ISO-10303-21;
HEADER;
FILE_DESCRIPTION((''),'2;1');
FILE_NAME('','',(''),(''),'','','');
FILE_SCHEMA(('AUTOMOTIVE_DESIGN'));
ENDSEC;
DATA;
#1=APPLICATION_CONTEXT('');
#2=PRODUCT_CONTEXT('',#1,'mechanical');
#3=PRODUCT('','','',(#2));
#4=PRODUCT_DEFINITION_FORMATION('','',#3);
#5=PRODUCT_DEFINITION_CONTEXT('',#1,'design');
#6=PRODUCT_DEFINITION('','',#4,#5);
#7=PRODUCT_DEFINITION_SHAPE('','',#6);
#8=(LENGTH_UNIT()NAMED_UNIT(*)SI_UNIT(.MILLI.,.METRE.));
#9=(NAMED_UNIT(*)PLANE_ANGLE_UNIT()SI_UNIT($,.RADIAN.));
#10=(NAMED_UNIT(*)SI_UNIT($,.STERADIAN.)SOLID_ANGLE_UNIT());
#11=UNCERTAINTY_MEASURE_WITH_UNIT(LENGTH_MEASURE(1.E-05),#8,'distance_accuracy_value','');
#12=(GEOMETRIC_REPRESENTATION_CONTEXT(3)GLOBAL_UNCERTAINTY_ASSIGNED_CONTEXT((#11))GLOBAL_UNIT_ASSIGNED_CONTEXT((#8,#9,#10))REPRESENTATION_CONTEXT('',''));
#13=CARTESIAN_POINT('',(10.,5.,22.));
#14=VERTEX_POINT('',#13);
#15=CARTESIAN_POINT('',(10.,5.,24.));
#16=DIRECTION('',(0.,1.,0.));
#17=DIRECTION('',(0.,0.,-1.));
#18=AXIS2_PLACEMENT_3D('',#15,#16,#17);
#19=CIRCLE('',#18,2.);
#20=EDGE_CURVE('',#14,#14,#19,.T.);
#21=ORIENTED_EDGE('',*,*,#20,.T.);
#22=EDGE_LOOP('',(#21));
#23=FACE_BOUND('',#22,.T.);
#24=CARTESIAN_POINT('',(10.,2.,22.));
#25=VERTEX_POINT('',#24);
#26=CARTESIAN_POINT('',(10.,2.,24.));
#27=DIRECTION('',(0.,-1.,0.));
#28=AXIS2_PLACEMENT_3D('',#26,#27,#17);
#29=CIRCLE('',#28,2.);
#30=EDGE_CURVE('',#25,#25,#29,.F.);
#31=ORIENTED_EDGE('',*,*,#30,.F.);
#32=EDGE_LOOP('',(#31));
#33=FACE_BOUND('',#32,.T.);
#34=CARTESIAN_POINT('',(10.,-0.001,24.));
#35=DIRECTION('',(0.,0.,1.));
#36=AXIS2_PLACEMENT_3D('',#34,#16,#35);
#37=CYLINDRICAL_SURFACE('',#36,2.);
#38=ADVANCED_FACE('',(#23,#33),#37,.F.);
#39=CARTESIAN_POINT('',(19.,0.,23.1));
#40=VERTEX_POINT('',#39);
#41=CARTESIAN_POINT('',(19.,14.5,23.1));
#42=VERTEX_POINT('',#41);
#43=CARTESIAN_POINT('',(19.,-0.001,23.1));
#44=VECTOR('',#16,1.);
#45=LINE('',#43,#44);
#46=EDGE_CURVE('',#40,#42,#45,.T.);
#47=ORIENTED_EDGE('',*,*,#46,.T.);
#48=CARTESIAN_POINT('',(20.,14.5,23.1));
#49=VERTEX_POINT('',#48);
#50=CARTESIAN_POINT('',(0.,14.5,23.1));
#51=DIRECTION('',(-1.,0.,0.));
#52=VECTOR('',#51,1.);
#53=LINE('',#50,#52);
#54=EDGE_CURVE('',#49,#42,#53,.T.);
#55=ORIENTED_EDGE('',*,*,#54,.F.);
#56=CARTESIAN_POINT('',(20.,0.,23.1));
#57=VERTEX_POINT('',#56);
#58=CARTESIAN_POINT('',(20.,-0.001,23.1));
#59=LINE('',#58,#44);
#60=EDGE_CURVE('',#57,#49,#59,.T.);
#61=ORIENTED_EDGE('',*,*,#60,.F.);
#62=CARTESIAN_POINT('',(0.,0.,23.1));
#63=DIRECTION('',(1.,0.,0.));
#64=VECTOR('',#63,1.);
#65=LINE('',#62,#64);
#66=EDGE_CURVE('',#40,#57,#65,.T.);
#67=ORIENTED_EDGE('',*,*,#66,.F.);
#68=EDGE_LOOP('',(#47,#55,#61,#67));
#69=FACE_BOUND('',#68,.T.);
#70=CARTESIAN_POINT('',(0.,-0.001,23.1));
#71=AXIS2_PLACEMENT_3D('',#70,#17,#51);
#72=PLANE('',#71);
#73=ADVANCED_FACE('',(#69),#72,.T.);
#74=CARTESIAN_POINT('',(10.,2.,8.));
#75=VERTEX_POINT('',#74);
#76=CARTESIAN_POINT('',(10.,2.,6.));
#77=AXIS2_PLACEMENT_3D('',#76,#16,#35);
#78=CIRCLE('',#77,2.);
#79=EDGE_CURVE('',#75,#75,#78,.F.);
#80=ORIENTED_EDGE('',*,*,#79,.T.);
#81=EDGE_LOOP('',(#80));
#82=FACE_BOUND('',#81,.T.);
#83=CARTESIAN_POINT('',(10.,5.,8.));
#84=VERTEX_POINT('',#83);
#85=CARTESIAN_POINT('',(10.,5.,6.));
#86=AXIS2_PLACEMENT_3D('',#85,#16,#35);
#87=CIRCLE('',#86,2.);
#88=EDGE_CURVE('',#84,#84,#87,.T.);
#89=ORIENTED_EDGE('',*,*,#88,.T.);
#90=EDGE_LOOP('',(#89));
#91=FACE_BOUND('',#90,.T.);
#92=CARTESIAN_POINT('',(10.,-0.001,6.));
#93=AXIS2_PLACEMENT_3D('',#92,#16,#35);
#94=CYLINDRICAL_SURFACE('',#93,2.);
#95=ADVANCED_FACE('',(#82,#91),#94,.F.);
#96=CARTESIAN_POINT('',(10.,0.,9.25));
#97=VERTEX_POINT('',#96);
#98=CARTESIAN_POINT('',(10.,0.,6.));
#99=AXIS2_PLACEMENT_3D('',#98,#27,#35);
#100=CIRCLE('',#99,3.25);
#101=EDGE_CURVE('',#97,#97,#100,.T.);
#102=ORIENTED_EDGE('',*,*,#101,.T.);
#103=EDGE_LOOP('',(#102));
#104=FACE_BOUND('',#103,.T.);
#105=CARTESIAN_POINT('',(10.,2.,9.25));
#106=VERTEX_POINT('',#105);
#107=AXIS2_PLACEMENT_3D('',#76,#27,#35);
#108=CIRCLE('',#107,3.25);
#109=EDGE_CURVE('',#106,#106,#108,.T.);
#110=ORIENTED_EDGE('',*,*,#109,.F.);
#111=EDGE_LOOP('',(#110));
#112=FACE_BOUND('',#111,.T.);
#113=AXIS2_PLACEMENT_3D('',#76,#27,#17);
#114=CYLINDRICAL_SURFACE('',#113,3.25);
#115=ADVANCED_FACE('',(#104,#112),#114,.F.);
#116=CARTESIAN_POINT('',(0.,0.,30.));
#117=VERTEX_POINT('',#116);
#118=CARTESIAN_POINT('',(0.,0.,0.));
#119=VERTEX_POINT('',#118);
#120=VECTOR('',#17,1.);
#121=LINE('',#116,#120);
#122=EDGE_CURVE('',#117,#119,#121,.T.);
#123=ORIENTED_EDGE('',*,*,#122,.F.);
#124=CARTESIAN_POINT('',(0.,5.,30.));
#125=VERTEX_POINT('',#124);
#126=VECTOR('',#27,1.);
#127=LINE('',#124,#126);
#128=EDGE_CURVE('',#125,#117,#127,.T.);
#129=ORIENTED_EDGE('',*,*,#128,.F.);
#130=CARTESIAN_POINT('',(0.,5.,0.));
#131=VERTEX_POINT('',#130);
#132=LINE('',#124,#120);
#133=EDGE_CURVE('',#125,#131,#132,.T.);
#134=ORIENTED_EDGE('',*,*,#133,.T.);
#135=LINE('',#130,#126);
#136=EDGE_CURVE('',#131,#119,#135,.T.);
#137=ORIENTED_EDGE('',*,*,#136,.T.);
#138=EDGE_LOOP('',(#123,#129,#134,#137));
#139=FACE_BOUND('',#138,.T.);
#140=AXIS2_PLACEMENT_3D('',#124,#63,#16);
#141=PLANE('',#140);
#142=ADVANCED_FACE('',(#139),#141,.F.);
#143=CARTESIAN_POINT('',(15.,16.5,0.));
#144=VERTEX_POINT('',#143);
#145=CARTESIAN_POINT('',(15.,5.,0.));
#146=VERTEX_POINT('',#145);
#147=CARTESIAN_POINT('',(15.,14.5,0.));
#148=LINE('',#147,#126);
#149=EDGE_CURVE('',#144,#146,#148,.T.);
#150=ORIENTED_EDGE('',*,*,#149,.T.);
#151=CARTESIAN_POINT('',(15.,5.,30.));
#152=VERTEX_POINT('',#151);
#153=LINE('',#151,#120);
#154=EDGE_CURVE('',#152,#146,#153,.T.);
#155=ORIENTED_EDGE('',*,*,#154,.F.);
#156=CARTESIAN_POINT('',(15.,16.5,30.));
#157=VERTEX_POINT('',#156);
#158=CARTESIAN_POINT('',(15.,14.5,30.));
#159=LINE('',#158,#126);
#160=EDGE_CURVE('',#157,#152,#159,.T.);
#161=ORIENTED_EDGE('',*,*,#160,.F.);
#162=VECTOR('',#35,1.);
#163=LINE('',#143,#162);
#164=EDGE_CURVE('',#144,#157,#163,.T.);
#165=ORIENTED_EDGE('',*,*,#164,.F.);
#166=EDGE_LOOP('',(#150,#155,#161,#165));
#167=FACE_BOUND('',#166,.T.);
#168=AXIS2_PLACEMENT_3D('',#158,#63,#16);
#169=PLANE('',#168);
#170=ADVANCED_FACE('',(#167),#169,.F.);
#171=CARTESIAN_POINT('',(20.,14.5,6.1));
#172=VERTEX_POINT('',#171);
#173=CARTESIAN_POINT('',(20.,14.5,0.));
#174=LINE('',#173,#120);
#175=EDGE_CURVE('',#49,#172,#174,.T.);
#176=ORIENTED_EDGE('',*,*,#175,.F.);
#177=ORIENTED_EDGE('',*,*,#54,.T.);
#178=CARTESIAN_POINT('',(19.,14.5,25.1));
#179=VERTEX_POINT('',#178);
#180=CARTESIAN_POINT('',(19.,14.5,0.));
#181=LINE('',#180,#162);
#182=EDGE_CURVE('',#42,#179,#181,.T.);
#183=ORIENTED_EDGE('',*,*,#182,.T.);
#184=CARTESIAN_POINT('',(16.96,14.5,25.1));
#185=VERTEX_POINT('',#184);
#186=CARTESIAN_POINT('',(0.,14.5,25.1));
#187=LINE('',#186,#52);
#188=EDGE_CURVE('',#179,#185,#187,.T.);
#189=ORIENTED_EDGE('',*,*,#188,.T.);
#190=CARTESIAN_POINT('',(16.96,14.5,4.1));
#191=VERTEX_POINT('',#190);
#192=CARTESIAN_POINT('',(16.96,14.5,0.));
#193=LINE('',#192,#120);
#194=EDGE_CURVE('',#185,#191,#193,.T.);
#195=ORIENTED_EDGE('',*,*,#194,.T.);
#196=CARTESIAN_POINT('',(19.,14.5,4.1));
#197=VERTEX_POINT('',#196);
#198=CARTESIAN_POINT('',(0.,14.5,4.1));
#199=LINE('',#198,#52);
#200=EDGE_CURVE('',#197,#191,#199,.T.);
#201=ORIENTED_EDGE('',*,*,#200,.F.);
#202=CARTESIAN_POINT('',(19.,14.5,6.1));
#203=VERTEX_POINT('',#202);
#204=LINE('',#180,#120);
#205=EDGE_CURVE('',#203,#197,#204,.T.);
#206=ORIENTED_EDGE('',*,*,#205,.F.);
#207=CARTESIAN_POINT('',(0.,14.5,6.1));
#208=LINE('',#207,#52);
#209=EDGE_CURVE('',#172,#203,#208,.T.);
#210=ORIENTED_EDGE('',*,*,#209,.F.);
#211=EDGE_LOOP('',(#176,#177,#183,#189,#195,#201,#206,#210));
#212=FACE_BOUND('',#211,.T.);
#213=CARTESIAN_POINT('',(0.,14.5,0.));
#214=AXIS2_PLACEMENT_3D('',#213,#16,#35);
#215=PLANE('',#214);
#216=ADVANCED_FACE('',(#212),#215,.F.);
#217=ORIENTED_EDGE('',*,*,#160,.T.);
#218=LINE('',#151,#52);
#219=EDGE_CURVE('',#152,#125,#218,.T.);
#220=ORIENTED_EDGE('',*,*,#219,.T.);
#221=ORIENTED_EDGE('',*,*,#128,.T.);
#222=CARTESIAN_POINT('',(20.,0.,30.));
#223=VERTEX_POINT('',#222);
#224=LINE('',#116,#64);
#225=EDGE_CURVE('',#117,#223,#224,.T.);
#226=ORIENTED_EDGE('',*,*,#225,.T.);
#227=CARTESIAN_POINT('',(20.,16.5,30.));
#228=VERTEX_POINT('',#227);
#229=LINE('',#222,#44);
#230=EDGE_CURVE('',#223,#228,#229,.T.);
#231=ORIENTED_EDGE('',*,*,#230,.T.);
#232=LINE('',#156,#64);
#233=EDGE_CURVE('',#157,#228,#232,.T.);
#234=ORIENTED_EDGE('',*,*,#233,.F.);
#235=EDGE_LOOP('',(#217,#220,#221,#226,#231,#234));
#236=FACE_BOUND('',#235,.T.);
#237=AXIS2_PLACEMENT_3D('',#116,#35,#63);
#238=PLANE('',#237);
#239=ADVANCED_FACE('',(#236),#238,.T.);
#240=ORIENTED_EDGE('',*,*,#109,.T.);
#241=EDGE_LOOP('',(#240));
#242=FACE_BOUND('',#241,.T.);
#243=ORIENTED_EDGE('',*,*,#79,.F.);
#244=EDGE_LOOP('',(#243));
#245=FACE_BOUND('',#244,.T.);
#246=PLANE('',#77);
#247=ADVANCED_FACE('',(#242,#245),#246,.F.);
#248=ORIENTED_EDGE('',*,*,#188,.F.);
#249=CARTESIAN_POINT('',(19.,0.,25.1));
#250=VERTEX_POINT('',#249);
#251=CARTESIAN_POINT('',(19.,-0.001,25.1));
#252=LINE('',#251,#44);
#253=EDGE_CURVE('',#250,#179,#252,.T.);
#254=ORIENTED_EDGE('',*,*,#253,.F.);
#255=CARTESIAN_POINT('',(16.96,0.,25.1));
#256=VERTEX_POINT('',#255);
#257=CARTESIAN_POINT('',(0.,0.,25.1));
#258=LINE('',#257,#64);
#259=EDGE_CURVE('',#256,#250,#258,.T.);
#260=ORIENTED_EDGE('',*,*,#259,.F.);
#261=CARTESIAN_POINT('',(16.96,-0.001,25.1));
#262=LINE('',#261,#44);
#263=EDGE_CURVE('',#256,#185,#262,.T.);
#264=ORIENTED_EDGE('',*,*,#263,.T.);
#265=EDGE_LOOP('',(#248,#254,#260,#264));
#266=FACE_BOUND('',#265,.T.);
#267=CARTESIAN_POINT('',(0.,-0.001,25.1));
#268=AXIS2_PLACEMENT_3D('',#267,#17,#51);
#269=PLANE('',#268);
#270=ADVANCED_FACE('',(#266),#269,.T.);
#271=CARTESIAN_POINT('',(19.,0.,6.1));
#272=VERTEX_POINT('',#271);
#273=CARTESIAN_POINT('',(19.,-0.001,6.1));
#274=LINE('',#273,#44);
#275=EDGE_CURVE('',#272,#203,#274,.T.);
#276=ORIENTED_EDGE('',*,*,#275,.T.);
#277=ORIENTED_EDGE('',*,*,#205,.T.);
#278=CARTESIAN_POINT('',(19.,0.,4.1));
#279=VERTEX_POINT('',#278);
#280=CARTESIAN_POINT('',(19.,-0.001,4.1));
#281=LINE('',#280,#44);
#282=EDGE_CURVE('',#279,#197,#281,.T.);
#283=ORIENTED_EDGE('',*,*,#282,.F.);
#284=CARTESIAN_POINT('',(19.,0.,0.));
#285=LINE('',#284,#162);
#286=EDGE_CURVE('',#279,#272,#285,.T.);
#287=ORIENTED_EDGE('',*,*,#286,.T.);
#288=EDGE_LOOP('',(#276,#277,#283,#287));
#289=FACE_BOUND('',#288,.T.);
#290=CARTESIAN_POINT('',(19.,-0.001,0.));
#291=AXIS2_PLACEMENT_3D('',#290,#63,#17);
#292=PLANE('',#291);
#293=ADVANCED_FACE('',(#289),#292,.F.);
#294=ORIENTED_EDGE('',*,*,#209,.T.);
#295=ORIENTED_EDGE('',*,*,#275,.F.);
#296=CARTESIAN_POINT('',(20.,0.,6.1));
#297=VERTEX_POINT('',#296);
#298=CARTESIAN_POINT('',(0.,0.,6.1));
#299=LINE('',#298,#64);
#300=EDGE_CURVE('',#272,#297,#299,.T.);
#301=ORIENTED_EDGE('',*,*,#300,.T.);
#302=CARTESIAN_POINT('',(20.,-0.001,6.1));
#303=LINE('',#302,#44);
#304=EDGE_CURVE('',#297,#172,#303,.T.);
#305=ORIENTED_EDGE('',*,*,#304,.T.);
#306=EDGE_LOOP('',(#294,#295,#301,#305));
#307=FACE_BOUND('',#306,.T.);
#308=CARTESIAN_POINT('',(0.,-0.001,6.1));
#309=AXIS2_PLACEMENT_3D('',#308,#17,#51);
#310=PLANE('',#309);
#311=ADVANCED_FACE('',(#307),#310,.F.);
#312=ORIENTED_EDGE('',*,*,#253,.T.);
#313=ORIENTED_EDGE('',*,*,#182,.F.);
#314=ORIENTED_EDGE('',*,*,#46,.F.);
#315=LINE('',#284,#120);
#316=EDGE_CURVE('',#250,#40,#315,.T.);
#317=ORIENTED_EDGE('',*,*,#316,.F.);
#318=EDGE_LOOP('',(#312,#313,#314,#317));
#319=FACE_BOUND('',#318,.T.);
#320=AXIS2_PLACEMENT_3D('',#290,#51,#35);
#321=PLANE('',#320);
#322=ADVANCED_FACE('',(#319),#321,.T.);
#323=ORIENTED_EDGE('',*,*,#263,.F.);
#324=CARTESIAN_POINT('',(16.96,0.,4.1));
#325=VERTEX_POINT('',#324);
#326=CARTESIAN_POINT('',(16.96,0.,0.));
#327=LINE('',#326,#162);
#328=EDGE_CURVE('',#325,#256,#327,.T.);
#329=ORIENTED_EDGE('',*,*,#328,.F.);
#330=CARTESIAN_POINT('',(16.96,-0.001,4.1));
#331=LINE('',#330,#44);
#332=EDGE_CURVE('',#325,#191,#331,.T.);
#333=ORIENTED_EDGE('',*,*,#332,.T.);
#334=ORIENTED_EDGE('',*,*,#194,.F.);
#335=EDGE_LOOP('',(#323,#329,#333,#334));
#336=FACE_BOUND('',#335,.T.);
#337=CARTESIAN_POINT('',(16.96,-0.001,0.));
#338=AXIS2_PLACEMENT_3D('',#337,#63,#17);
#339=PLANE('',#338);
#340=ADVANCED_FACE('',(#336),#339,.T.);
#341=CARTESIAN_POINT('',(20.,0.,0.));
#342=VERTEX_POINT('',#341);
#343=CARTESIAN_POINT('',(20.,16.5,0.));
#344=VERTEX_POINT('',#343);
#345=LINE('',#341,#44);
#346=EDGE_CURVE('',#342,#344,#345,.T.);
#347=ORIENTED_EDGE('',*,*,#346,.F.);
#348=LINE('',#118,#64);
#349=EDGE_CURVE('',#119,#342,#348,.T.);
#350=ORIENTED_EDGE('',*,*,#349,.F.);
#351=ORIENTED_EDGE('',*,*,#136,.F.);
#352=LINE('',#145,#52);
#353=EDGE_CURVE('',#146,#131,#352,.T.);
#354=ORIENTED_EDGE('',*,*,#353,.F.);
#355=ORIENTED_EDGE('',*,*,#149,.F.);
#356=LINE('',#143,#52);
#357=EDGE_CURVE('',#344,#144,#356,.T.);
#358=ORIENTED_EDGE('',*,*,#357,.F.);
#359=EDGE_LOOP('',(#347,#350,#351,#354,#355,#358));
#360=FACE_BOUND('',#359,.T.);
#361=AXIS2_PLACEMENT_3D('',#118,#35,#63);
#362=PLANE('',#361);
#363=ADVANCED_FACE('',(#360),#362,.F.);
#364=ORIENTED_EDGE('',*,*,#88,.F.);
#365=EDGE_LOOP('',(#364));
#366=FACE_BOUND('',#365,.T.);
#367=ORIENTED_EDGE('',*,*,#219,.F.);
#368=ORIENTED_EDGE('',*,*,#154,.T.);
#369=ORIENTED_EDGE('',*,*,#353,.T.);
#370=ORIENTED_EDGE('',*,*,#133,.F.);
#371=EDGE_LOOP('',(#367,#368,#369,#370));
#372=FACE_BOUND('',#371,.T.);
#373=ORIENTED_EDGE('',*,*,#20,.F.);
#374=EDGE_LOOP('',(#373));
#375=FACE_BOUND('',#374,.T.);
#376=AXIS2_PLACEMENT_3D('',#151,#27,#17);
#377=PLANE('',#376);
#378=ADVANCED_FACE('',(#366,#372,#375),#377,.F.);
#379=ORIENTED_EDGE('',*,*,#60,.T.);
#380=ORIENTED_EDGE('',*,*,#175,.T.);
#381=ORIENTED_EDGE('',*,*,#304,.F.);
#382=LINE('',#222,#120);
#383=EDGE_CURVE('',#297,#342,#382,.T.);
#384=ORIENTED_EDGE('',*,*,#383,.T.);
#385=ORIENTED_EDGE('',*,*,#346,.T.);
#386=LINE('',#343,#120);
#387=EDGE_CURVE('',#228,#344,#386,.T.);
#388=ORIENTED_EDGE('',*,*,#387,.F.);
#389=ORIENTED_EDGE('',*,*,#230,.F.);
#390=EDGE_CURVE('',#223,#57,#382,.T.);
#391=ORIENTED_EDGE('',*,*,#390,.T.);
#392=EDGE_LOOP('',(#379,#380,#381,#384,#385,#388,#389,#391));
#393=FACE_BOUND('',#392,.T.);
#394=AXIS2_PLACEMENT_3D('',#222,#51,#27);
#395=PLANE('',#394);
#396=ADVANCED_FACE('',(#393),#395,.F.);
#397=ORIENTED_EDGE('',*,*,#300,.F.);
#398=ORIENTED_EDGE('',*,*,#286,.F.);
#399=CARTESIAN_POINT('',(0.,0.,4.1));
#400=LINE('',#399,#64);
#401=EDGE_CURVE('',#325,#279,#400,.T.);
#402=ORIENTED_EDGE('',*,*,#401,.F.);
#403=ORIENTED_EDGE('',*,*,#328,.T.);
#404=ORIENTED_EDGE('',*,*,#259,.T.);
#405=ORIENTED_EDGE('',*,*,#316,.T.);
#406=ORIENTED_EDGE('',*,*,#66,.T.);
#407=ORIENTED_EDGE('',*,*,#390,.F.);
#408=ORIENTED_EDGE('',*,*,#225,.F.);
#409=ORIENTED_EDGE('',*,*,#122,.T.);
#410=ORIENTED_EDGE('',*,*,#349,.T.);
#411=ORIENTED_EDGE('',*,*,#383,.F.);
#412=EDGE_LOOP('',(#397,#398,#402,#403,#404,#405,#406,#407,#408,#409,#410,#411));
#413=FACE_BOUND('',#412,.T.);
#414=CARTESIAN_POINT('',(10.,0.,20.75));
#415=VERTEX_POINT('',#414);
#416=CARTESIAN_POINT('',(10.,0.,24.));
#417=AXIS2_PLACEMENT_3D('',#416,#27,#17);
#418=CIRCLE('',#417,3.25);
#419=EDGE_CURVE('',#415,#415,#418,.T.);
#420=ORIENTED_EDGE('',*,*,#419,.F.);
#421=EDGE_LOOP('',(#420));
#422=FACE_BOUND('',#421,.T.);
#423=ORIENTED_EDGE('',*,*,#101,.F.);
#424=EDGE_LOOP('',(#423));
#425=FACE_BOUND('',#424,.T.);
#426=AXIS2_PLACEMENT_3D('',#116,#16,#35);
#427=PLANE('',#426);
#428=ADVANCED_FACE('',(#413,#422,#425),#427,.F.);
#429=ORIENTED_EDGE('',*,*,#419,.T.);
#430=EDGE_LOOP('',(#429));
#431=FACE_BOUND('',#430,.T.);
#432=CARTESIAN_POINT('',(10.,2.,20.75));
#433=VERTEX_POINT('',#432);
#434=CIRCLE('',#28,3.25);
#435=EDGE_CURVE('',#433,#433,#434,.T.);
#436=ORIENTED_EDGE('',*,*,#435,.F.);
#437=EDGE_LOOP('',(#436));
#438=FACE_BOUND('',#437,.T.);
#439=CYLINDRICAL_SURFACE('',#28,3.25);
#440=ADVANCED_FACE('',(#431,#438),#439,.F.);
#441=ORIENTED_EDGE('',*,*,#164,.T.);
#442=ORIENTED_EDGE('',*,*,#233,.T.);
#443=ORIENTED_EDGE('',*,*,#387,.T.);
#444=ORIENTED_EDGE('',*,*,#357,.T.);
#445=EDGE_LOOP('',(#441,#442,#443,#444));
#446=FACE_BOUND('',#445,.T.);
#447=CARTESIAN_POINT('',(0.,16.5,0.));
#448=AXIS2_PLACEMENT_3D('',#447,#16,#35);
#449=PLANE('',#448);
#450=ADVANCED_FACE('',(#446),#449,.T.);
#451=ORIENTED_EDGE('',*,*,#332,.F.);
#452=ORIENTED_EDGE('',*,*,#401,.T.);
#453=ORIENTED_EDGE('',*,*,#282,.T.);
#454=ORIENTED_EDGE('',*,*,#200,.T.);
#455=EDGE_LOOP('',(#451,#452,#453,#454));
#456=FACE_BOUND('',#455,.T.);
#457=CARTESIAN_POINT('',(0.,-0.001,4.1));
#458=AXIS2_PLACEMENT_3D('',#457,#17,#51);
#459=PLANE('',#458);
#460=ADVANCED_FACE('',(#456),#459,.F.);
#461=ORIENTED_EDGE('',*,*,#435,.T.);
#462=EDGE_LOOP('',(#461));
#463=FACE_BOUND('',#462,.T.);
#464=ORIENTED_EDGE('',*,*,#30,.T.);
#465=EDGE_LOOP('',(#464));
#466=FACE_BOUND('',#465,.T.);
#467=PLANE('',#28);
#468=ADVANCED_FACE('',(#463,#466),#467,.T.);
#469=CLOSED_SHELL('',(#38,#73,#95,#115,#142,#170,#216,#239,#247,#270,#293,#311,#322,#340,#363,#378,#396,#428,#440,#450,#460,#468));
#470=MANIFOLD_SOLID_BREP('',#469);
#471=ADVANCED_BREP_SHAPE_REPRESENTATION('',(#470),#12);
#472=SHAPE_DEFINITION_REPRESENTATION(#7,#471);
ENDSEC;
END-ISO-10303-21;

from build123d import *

# Parameters (mm, degrees)
SALIENTE_EXTRUIR1_DEPTH = 30
CORTAR_EXTRUIR1_REACH   = 40.862
CORTAR_EXTRUIR2_REACH   = 39.286
CROQUIS3_R              = 2
CROQUIS4_R              = 3.25
CORTAR_EXTRUIR3_DEPTH   = 2
CROQUIS5_W              = 5
CROQUIS5_H              = 30
SALIENTE_EXTRUIR2_DEPTH = 2


with BuildPart() as part:
    # Croquis1 → Saliente-Extruir1 (new body)
    with BuildSketch(Plane.XY):
        Polygon((20, 0), (20, 14.5), (15, 14.5), (15, 5), (0, 5), (0, 0), align=None)
    extrude(amount=SALIENTE_EXTRUIR1_DEPTH)

    # Croquis2 → Cortar-Extruir1 (cut, up to next)
    with BuildSketch(Plane(origin=(0, 14.5, 0), x_dir=(1, 0, 0), z_dir=(0, 1, 0)), mode=Mode.PRIVATE) as cortar_extruir1_sk1:
        Polygon((20, -23.1), (20, -15), (20, -6.1), (19, -6.1), (19, -4.1), (16.96, -4.1), (16.96, -25.1), (19, -25.1), (19, -23.1), align=None)
    cortar_extruir1_tool1 = extrude(cortar_extruir1_sk1.sketch, amount=-CORTAR_EXTRUIR1_REACH, mode=Mode.PRIVATE) & part.part
    add(cortar_extruir1_tool1.solids().sort_by_distance((18.411818, 14.5, 14.6))[0], mode=Mode.SUBTRACT)

    # Croquis3 → Cortar-Extruir2 (cut, up to next)
    with BuildSketch(Plane(origin=(0, 5, 0), x_dir=(1, 0, 0), z_dir=(0, 1, 0)), mode=Mode.PRIVATE) as cortar_extruir2_sk1:
        with Locations((10, -6)):
            Circle(CROQUIS3_R)
    cortar_extruir2_tool1 = extrude(cortar_extruir2_sk1.sketch, amount=-CORTAR_EXTRUIR2_REACH, mode=Mode.PRIVATE) & part.part
    # Croquis3 → Cortar-Extruir2 (cut, up to next)
    with BuildSketch(Plane(origin=(0, 5, 0), x_dir=(1, 0, 0), z_dir=(0, 1, 0)), mode=Mode.PRIVATE) as cortar_extruir2_sk2:
        with Locations((10, -24)):
            Circle(CROQUIS3_R)
    cortar_extruir2_tool2 = extrude(cortar_extruir2_sk2.sketch, amount=-CORTAR_EXTRUIR2_REACH, mode=Mode.PRIVATE) & part.part
    add(cortar_extruir2_tool1.solids().sort_by_distance((10, 5, 6))[0], mode=Mode.SUBTRACT)
    add(cortar_extruir2_tool2.solids().sort_by_distance((10, 5, 24))[0], mode=Mode.SUBTRACT)

    # Croquis4 → Cortar-Extruir3 (cut)
    with BuildSketch(Plane.XZ):
        with Locations((10, 24)):
            Circle(CROQUIS4_R)
        with Locations((10, 6)):
            Circle(CROQUIS4_R)
    extrude(amount=-CORTAR_EXTRUIR3_DEPTH, mode=Mode.SUBTRACT)

    # Croquis5 → Saliente-Extruir2 (add)
    with BuildSketch(Plane(origin=(0, 14.5, 0), x_dir=(1, 0, 0), z_dir=(0, 1, 0))):
        with Locations((17.5, -15)):
            Rectangle(CROQUIS5_W, CROQUIS5_H)
    extrude(amount=SALIENTE_EXTRUIR2_DEPTH)


solid = part.part
